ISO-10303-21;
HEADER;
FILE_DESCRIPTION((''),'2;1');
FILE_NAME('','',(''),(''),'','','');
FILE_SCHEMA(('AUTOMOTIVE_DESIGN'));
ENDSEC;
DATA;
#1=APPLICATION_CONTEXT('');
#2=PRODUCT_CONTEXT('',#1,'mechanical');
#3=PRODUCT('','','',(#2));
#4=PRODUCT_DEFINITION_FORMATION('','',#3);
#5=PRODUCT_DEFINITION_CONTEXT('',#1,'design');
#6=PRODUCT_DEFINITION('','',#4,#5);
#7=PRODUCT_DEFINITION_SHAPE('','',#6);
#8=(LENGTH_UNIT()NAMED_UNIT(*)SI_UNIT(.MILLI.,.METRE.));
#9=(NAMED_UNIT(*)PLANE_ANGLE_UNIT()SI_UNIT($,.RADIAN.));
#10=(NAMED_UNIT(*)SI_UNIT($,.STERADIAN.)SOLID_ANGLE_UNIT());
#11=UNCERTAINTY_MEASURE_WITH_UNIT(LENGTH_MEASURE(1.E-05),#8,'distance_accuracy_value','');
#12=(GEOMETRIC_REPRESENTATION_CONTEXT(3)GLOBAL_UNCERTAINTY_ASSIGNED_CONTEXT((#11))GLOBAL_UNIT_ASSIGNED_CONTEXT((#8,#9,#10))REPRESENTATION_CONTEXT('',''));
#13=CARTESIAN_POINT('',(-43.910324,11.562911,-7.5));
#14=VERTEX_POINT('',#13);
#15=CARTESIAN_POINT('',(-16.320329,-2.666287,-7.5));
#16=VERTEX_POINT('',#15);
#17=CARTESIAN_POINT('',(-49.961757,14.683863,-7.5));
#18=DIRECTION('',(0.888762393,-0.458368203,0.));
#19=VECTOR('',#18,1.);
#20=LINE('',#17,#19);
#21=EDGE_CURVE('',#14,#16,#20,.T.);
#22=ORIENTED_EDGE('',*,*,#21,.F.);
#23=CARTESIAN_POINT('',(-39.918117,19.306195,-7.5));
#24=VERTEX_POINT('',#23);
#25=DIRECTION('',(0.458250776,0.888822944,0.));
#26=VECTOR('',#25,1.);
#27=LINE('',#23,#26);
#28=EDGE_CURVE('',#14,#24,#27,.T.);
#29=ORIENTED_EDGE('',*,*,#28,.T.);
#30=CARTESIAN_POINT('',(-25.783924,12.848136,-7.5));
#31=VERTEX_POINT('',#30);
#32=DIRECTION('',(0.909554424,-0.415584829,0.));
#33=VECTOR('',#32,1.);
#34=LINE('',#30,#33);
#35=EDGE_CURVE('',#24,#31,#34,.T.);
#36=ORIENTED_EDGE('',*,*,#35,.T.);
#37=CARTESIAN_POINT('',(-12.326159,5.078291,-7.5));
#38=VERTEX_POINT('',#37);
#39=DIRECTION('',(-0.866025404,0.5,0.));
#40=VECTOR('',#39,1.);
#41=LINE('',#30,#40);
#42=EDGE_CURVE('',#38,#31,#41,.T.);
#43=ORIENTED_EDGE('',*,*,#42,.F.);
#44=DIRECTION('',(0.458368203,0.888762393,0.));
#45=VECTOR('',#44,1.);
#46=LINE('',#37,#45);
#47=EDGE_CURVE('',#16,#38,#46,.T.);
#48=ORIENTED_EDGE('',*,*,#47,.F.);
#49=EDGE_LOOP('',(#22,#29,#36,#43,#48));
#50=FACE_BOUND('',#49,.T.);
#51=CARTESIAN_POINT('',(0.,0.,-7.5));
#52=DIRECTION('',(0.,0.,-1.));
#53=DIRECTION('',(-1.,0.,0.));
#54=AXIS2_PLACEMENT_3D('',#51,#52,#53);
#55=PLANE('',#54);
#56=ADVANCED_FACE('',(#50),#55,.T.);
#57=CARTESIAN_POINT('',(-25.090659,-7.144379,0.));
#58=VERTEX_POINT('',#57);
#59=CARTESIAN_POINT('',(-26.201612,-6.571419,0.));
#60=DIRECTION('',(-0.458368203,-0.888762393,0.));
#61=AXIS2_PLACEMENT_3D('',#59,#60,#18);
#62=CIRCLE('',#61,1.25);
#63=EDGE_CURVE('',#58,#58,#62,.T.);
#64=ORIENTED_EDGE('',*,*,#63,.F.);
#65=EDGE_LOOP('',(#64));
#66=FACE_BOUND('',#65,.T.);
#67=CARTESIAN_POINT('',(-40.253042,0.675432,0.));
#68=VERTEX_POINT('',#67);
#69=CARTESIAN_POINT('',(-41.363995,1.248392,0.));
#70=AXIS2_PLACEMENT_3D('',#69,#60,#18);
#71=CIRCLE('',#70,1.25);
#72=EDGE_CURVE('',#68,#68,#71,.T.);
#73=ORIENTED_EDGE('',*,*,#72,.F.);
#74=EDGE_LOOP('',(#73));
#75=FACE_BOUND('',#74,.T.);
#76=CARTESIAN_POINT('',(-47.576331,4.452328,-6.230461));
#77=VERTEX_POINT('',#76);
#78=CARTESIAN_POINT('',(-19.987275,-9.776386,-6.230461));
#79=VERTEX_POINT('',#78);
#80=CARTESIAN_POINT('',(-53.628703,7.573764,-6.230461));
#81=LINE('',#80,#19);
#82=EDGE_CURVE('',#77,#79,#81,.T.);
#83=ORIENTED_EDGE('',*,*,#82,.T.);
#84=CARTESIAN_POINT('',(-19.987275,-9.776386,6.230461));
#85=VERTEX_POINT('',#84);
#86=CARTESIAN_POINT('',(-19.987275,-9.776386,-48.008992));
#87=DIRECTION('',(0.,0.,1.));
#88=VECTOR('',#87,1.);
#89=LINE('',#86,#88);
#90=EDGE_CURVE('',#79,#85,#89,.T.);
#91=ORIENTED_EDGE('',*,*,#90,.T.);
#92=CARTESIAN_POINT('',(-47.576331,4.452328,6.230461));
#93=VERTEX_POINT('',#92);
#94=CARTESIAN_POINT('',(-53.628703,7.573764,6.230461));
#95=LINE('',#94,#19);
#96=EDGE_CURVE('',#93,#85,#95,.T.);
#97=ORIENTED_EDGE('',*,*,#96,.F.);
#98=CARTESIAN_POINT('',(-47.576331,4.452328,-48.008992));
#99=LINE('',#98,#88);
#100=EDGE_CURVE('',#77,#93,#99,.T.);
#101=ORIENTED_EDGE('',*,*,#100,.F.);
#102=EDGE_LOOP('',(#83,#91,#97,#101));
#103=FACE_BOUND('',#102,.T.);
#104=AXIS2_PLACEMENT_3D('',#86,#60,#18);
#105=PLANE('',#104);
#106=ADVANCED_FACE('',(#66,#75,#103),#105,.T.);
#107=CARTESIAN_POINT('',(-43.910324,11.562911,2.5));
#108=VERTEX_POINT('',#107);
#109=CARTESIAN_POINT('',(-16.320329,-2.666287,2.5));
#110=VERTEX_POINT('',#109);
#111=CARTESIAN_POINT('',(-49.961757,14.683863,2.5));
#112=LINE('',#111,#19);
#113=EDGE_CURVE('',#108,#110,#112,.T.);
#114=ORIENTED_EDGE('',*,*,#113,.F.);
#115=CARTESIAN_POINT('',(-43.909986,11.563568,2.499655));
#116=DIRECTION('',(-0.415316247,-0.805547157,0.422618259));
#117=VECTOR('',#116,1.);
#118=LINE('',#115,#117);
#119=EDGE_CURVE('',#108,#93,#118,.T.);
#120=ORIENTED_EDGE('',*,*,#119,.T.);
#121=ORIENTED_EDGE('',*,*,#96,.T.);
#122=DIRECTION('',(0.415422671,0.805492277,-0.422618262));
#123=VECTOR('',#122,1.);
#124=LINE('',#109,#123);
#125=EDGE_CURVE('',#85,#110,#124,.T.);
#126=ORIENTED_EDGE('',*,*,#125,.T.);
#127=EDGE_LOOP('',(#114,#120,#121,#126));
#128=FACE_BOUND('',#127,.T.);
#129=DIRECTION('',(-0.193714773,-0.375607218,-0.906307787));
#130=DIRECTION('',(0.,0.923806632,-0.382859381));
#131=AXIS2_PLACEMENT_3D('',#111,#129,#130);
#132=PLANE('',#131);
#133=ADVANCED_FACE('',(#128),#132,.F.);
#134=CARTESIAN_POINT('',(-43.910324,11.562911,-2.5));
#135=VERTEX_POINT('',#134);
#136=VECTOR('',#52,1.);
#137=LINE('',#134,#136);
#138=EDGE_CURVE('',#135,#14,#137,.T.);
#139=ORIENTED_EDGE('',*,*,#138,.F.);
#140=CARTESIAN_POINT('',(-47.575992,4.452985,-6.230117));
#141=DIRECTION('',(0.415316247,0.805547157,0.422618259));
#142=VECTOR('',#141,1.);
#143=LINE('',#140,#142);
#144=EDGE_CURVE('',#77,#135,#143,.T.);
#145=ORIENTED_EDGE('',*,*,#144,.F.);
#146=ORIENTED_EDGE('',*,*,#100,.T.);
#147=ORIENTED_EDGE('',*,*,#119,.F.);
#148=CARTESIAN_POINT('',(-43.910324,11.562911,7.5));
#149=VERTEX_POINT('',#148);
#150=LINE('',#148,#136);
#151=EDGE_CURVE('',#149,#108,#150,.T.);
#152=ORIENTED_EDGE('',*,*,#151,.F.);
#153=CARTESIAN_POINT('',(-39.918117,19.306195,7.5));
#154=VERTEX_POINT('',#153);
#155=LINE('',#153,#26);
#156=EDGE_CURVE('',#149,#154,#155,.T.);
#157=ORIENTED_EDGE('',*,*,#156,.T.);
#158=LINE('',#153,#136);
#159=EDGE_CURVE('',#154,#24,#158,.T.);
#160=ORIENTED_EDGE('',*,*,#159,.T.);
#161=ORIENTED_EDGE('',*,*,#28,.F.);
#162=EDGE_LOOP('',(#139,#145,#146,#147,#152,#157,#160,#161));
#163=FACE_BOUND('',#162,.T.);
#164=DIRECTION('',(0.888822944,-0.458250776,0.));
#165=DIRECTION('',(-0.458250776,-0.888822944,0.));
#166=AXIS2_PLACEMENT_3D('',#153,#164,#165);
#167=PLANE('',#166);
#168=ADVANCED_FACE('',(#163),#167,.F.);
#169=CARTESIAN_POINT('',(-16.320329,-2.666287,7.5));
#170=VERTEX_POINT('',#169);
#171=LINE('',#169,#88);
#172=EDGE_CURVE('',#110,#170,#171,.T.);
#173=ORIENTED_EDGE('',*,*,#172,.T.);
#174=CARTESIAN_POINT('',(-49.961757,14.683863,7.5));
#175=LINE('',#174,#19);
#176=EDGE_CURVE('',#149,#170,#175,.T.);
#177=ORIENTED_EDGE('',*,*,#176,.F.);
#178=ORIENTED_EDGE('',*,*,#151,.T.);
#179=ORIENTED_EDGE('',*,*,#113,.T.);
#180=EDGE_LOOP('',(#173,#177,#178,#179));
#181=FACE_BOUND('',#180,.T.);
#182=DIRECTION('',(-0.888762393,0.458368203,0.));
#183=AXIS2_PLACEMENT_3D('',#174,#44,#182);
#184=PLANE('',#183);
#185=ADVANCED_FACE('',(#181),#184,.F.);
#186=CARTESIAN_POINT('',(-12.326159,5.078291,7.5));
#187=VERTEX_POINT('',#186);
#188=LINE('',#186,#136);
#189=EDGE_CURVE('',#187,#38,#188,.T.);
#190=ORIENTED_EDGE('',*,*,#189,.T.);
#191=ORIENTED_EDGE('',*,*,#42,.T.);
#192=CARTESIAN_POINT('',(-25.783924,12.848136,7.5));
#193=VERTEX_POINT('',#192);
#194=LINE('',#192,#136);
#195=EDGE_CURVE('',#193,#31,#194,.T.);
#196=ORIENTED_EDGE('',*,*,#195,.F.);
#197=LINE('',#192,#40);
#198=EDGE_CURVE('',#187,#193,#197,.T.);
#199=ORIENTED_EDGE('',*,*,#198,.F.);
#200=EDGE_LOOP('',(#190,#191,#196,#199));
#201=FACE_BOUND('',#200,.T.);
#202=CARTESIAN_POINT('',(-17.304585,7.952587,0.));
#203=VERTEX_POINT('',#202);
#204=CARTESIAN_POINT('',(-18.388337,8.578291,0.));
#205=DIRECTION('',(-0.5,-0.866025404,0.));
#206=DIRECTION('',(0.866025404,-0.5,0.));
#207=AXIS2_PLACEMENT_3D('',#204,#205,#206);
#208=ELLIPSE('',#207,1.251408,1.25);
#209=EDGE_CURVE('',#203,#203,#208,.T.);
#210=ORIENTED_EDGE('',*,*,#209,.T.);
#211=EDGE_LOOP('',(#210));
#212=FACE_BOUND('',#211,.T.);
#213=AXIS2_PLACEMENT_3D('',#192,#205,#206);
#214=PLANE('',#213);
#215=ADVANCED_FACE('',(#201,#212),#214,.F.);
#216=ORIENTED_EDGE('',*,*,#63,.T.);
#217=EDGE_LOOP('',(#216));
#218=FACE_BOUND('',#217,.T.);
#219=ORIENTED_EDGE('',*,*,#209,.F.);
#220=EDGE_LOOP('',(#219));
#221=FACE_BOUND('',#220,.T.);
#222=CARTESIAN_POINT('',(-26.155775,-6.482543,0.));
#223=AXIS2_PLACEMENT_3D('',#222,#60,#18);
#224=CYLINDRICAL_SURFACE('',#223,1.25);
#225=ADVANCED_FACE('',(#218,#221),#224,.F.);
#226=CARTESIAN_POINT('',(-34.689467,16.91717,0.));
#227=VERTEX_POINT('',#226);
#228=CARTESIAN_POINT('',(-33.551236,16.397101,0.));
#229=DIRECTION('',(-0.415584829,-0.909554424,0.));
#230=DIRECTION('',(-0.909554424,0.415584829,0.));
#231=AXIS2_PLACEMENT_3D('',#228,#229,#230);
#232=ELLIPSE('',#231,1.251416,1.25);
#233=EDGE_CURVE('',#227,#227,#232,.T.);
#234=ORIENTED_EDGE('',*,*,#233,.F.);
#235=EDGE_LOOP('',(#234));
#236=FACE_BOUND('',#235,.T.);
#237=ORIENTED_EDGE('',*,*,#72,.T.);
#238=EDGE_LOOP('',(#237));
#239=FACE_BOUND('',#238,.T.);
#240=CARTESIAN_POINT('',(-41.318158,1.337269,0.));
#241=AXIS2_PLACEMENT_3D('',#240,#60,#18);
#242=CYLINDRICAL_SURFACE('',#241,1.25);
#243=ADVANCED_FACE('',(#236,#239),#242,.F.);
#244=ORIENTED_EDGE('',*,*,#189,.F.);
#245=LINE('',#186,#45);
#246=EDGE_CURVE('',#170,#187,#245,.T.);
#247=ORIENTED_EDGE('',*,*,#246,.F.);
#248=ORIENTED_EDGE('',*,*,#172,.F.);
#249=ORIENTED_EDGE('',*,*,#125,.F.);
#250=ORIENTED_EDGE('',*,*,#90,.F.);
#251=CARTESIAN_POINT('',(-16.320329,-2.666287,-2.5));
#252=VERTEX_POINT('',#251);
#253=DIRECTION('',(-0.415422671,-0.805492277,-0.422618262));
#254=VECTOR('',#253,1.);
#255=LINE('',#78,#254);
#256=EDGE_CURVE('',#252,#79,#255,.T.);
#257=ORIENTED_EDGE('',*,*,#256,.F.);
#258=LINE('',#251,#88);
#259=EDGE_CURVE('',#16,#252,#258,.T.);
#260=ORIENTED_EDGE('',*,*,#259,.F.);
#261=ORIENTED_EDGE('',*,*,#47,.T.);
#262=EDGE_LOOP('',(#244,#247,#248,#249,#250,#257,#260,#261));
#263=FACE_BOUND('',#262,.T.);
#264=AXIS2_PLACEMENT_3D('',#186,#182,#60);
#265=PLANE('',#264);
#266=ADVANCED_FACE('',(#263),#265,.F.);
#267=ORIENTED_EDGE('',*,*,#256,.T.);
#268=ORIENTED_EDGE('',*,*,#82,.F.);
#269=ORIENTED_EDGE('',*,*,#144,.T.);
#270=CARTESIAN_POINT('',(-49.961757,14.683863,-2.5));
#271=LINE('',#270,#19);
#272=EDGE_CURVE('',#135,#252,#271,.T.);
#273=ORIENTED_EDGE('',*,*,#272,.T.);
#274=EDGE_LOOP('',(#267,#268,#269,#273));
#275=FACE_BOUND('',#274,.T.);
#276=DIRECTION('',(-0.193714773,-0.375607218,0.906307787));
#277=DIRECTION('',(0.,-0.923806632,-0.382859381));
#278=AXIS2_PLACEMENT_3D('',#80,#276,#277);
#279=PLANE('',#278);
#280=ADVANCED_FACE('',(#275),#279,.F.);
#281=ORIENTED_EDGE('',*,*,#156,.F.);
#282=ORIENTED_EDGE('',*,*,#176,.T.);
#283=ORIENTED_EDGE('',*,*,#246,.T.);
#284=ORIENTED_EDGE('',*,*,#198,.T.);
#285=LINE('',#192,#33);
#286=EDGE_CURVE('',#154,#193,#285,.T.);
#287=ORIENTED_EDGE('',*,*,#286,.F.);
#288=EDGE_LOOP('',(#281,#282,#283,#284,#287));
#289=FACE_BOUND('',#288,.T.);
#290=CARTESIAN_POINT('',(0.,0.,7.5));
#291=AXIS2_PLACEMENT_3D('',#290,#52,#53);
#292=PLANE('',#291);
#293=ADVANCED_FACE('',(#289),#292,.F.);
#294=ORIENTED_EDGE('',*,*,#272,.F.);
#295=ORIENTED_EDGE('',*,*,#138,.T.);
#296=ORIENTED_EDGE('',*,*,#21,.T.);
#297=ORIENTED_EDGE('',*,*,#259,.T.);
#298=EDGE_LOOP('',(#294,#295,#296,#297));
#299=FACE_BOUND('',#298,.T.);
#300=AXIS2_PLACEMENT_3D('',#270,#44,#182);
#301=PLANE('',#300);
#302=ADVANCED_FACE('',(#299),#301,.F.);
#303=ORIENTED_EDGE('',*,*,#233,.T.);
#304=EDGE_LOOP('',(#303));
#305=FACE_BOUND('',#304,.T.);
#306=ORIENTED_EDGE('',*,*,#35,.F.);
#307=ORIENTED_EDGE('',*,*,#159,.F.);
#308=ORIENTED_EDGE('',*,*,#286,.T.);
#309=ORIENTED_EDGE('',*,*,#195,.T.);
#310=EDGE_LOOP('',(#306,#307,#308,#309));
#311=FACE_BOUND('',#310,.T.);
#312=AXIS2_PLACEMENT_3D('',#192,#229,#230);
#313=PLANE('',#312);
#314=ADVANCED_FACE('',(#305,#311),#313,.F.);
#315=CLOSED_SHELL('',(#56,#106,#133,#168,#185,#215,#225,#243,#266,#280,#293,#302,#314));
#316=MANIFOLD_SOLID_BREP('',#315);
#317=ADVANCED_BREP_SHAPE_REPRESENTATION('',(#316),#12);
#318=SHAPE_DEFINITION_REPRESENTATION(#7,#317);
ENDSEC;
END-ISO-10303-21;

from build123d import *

# Parameters (mm, degrees)
STOCK_SPIRALE_ENROUL_E_1_START = -7.5
STOCK_SPIRALE_ENROUL_E_1_DEPTH = 15
BOSS_EXTRU_1_DEPTH             = 15
ENL_V_MAT_EXTRU_1_REACH        = 41.844
ESQUISSE40_R                   = 1.25
ENL_V_MAT_EXTRU_39_DEPTH       = 0.1
ESQUISSE45_R                   = 1.25
ENL_V_MAT_EXTRU_44_DEPTH       = 54.34000069


# Read off the part's stored shape, not the designer's step: Stock-spirale_enroulée-1
with BuildPart() as part:
    # Stock-spirale_enroulée-1 outline → Stock-spirale_enroulée-1 (new body)
    with BuildSketch(Plane.XY.offset(STOCK_SPIRALE_ENROUL_E_1_START)):
        Polygon((-32.409116649, 0), (-14.945224597, 0), (-12.326158681, 5.078291377), (-25.783924084, 12.848135855), (-39.918116919, 19.306194835), (-42.53651187, 14.227557472), align=None)
    extrude(amount=STOCK_SPIRALE_ENROUL_E_1_DEPTH)

    # Esquisse1 → Boss.-Extru.1 (add)
    with BuildSketch(Plane.XY.offset(7.5)):
        Polygon((-42.53651187, 14.227557472), (-32.409116649, 0), (-14.945224597, 0), (-19.987274825, -9.776386321), (-47.576330697, 4.452327735), align=None)
    extrude(amount=-BOSS_EXTRU_1_DEPTH)

    # Enlèv. mat.-Extru.1: up to this plane
    enl_v_mat_extru_1_end = Plane(origin=(-39.918116919, 19.306194835, 7.5), z_dir=(0.8888229444852807, -0.45825077562020095, 0))
    # Esquisse2 → Enlèv. mat.-Extru.1 (cut, up to the surface)
    with BuildSketch(Plane(origin=(-11.805211849, 6.088391881, 0), x_dir=(0, 0, -1), z_dir=(0.8887623928011207, -0.4583682025865522, 0)), mode=Mode.PRIVATE) as enl_v_mat_extru_1_sk1:
        Polygon((-7.5, -9.850415736), (-2.5, -9.850415736), (-6.230461265, -17.850415736), (-7.5, -17.850415736), align=None)
    enl_v_mat_extru_1_tool1 = split(extrude(enl_v_mat_extru_1_sk1.sketch, amount=-ENL_V_MAT_EXTRU_1_REACH, mode=Mode.PRIVATE), bisect_by=enl_v_mat_extru_1_end, keep=Keep.BOTH, mode=Mode.PRIVATE)
    add(enl_v_mat_extru_1_tool1.solids().sort_by_distance((-17.790155, -5.516236, 5.747642))[0], mode=Mode.SUBTRACT)
    # Esquisse2 → Enlèv. mat.-Extru.1 (cut, up to the surface)
    with BuildSketch(Plane(origin=(-11.805211849, 6.088391881, 0), x_dir=(0, 0, -1), z_dir=(0.8887623928011207, -0.4583682025865522, 0)), mode=Mode.PRIVATE) as enl_v_mat_extru_1_sk2:
        Polygon((6.230461265, -17.850415736), (2.5, -9.850415736), (7.5, -9.850415736), (7.5, -17.850415736), align=None)
    enl_v_mat_extru_1_tool2 = split(extrude(enl_v_mat_extru_1_sk2.sketch, amount=-ENL_V_MAT_EXTRU_1_REACH, mode=Mode.PRIVATE), bisect_by=enl_v_mat_extru_1_end, keep=Keep.BOTH, mode=Mode.PRIVATE)
    add(enl_v_mat_extru_1_tool2.solids().sort_by_distance((-17.790155, -5.516236, -5.747642))[0], mode=Mode.SUBTRACT)

    # Esquisse40 → Enlèv. mat.-Extru.39 (cut)
    with BuildSketch(Plane(origin=(-35.583416905, -1.7328691, -7.5), x_dir=(0.8887623928011112, -0.4583682025865705, 0), z_dir=(-0.4583682025865705, -0.8887623928011112, 0))):
        with Locations((-6.504075816, 7.5)):
            Circle(ESQUISSE40_R)
        with Locations((10.556032704, 7.5)):
            Circle(ESQUISSE40_R)
    extrude(amount=-ENL_V_MAT_EXTRU_39_DEPTH, mode=Mode.SUBTRACT)

    # Esquisse45 → Enlèv. mat.-Extru.44 (cut, through all)
    with BuildSketch(Plane(origin=(-8.182062976, -15.864778202, 0), x_dir=(0.8887623928011112, -0.4583682025865705, 0), z_dir=(-0.4583682025865705, -0.8887623928011112, 0))):
        with Locations((-37.334986474, 0)):
            Circle(ESQUISSE45_R)
        with Locations((-20.274877954, 0)):
            Circle(ESQUISSE45_R)
    extrude(amount=-ENL_V_MAT_EXTRU_44_DEPTH, mode=Mode.SUBTRACT)


solid = part.part
